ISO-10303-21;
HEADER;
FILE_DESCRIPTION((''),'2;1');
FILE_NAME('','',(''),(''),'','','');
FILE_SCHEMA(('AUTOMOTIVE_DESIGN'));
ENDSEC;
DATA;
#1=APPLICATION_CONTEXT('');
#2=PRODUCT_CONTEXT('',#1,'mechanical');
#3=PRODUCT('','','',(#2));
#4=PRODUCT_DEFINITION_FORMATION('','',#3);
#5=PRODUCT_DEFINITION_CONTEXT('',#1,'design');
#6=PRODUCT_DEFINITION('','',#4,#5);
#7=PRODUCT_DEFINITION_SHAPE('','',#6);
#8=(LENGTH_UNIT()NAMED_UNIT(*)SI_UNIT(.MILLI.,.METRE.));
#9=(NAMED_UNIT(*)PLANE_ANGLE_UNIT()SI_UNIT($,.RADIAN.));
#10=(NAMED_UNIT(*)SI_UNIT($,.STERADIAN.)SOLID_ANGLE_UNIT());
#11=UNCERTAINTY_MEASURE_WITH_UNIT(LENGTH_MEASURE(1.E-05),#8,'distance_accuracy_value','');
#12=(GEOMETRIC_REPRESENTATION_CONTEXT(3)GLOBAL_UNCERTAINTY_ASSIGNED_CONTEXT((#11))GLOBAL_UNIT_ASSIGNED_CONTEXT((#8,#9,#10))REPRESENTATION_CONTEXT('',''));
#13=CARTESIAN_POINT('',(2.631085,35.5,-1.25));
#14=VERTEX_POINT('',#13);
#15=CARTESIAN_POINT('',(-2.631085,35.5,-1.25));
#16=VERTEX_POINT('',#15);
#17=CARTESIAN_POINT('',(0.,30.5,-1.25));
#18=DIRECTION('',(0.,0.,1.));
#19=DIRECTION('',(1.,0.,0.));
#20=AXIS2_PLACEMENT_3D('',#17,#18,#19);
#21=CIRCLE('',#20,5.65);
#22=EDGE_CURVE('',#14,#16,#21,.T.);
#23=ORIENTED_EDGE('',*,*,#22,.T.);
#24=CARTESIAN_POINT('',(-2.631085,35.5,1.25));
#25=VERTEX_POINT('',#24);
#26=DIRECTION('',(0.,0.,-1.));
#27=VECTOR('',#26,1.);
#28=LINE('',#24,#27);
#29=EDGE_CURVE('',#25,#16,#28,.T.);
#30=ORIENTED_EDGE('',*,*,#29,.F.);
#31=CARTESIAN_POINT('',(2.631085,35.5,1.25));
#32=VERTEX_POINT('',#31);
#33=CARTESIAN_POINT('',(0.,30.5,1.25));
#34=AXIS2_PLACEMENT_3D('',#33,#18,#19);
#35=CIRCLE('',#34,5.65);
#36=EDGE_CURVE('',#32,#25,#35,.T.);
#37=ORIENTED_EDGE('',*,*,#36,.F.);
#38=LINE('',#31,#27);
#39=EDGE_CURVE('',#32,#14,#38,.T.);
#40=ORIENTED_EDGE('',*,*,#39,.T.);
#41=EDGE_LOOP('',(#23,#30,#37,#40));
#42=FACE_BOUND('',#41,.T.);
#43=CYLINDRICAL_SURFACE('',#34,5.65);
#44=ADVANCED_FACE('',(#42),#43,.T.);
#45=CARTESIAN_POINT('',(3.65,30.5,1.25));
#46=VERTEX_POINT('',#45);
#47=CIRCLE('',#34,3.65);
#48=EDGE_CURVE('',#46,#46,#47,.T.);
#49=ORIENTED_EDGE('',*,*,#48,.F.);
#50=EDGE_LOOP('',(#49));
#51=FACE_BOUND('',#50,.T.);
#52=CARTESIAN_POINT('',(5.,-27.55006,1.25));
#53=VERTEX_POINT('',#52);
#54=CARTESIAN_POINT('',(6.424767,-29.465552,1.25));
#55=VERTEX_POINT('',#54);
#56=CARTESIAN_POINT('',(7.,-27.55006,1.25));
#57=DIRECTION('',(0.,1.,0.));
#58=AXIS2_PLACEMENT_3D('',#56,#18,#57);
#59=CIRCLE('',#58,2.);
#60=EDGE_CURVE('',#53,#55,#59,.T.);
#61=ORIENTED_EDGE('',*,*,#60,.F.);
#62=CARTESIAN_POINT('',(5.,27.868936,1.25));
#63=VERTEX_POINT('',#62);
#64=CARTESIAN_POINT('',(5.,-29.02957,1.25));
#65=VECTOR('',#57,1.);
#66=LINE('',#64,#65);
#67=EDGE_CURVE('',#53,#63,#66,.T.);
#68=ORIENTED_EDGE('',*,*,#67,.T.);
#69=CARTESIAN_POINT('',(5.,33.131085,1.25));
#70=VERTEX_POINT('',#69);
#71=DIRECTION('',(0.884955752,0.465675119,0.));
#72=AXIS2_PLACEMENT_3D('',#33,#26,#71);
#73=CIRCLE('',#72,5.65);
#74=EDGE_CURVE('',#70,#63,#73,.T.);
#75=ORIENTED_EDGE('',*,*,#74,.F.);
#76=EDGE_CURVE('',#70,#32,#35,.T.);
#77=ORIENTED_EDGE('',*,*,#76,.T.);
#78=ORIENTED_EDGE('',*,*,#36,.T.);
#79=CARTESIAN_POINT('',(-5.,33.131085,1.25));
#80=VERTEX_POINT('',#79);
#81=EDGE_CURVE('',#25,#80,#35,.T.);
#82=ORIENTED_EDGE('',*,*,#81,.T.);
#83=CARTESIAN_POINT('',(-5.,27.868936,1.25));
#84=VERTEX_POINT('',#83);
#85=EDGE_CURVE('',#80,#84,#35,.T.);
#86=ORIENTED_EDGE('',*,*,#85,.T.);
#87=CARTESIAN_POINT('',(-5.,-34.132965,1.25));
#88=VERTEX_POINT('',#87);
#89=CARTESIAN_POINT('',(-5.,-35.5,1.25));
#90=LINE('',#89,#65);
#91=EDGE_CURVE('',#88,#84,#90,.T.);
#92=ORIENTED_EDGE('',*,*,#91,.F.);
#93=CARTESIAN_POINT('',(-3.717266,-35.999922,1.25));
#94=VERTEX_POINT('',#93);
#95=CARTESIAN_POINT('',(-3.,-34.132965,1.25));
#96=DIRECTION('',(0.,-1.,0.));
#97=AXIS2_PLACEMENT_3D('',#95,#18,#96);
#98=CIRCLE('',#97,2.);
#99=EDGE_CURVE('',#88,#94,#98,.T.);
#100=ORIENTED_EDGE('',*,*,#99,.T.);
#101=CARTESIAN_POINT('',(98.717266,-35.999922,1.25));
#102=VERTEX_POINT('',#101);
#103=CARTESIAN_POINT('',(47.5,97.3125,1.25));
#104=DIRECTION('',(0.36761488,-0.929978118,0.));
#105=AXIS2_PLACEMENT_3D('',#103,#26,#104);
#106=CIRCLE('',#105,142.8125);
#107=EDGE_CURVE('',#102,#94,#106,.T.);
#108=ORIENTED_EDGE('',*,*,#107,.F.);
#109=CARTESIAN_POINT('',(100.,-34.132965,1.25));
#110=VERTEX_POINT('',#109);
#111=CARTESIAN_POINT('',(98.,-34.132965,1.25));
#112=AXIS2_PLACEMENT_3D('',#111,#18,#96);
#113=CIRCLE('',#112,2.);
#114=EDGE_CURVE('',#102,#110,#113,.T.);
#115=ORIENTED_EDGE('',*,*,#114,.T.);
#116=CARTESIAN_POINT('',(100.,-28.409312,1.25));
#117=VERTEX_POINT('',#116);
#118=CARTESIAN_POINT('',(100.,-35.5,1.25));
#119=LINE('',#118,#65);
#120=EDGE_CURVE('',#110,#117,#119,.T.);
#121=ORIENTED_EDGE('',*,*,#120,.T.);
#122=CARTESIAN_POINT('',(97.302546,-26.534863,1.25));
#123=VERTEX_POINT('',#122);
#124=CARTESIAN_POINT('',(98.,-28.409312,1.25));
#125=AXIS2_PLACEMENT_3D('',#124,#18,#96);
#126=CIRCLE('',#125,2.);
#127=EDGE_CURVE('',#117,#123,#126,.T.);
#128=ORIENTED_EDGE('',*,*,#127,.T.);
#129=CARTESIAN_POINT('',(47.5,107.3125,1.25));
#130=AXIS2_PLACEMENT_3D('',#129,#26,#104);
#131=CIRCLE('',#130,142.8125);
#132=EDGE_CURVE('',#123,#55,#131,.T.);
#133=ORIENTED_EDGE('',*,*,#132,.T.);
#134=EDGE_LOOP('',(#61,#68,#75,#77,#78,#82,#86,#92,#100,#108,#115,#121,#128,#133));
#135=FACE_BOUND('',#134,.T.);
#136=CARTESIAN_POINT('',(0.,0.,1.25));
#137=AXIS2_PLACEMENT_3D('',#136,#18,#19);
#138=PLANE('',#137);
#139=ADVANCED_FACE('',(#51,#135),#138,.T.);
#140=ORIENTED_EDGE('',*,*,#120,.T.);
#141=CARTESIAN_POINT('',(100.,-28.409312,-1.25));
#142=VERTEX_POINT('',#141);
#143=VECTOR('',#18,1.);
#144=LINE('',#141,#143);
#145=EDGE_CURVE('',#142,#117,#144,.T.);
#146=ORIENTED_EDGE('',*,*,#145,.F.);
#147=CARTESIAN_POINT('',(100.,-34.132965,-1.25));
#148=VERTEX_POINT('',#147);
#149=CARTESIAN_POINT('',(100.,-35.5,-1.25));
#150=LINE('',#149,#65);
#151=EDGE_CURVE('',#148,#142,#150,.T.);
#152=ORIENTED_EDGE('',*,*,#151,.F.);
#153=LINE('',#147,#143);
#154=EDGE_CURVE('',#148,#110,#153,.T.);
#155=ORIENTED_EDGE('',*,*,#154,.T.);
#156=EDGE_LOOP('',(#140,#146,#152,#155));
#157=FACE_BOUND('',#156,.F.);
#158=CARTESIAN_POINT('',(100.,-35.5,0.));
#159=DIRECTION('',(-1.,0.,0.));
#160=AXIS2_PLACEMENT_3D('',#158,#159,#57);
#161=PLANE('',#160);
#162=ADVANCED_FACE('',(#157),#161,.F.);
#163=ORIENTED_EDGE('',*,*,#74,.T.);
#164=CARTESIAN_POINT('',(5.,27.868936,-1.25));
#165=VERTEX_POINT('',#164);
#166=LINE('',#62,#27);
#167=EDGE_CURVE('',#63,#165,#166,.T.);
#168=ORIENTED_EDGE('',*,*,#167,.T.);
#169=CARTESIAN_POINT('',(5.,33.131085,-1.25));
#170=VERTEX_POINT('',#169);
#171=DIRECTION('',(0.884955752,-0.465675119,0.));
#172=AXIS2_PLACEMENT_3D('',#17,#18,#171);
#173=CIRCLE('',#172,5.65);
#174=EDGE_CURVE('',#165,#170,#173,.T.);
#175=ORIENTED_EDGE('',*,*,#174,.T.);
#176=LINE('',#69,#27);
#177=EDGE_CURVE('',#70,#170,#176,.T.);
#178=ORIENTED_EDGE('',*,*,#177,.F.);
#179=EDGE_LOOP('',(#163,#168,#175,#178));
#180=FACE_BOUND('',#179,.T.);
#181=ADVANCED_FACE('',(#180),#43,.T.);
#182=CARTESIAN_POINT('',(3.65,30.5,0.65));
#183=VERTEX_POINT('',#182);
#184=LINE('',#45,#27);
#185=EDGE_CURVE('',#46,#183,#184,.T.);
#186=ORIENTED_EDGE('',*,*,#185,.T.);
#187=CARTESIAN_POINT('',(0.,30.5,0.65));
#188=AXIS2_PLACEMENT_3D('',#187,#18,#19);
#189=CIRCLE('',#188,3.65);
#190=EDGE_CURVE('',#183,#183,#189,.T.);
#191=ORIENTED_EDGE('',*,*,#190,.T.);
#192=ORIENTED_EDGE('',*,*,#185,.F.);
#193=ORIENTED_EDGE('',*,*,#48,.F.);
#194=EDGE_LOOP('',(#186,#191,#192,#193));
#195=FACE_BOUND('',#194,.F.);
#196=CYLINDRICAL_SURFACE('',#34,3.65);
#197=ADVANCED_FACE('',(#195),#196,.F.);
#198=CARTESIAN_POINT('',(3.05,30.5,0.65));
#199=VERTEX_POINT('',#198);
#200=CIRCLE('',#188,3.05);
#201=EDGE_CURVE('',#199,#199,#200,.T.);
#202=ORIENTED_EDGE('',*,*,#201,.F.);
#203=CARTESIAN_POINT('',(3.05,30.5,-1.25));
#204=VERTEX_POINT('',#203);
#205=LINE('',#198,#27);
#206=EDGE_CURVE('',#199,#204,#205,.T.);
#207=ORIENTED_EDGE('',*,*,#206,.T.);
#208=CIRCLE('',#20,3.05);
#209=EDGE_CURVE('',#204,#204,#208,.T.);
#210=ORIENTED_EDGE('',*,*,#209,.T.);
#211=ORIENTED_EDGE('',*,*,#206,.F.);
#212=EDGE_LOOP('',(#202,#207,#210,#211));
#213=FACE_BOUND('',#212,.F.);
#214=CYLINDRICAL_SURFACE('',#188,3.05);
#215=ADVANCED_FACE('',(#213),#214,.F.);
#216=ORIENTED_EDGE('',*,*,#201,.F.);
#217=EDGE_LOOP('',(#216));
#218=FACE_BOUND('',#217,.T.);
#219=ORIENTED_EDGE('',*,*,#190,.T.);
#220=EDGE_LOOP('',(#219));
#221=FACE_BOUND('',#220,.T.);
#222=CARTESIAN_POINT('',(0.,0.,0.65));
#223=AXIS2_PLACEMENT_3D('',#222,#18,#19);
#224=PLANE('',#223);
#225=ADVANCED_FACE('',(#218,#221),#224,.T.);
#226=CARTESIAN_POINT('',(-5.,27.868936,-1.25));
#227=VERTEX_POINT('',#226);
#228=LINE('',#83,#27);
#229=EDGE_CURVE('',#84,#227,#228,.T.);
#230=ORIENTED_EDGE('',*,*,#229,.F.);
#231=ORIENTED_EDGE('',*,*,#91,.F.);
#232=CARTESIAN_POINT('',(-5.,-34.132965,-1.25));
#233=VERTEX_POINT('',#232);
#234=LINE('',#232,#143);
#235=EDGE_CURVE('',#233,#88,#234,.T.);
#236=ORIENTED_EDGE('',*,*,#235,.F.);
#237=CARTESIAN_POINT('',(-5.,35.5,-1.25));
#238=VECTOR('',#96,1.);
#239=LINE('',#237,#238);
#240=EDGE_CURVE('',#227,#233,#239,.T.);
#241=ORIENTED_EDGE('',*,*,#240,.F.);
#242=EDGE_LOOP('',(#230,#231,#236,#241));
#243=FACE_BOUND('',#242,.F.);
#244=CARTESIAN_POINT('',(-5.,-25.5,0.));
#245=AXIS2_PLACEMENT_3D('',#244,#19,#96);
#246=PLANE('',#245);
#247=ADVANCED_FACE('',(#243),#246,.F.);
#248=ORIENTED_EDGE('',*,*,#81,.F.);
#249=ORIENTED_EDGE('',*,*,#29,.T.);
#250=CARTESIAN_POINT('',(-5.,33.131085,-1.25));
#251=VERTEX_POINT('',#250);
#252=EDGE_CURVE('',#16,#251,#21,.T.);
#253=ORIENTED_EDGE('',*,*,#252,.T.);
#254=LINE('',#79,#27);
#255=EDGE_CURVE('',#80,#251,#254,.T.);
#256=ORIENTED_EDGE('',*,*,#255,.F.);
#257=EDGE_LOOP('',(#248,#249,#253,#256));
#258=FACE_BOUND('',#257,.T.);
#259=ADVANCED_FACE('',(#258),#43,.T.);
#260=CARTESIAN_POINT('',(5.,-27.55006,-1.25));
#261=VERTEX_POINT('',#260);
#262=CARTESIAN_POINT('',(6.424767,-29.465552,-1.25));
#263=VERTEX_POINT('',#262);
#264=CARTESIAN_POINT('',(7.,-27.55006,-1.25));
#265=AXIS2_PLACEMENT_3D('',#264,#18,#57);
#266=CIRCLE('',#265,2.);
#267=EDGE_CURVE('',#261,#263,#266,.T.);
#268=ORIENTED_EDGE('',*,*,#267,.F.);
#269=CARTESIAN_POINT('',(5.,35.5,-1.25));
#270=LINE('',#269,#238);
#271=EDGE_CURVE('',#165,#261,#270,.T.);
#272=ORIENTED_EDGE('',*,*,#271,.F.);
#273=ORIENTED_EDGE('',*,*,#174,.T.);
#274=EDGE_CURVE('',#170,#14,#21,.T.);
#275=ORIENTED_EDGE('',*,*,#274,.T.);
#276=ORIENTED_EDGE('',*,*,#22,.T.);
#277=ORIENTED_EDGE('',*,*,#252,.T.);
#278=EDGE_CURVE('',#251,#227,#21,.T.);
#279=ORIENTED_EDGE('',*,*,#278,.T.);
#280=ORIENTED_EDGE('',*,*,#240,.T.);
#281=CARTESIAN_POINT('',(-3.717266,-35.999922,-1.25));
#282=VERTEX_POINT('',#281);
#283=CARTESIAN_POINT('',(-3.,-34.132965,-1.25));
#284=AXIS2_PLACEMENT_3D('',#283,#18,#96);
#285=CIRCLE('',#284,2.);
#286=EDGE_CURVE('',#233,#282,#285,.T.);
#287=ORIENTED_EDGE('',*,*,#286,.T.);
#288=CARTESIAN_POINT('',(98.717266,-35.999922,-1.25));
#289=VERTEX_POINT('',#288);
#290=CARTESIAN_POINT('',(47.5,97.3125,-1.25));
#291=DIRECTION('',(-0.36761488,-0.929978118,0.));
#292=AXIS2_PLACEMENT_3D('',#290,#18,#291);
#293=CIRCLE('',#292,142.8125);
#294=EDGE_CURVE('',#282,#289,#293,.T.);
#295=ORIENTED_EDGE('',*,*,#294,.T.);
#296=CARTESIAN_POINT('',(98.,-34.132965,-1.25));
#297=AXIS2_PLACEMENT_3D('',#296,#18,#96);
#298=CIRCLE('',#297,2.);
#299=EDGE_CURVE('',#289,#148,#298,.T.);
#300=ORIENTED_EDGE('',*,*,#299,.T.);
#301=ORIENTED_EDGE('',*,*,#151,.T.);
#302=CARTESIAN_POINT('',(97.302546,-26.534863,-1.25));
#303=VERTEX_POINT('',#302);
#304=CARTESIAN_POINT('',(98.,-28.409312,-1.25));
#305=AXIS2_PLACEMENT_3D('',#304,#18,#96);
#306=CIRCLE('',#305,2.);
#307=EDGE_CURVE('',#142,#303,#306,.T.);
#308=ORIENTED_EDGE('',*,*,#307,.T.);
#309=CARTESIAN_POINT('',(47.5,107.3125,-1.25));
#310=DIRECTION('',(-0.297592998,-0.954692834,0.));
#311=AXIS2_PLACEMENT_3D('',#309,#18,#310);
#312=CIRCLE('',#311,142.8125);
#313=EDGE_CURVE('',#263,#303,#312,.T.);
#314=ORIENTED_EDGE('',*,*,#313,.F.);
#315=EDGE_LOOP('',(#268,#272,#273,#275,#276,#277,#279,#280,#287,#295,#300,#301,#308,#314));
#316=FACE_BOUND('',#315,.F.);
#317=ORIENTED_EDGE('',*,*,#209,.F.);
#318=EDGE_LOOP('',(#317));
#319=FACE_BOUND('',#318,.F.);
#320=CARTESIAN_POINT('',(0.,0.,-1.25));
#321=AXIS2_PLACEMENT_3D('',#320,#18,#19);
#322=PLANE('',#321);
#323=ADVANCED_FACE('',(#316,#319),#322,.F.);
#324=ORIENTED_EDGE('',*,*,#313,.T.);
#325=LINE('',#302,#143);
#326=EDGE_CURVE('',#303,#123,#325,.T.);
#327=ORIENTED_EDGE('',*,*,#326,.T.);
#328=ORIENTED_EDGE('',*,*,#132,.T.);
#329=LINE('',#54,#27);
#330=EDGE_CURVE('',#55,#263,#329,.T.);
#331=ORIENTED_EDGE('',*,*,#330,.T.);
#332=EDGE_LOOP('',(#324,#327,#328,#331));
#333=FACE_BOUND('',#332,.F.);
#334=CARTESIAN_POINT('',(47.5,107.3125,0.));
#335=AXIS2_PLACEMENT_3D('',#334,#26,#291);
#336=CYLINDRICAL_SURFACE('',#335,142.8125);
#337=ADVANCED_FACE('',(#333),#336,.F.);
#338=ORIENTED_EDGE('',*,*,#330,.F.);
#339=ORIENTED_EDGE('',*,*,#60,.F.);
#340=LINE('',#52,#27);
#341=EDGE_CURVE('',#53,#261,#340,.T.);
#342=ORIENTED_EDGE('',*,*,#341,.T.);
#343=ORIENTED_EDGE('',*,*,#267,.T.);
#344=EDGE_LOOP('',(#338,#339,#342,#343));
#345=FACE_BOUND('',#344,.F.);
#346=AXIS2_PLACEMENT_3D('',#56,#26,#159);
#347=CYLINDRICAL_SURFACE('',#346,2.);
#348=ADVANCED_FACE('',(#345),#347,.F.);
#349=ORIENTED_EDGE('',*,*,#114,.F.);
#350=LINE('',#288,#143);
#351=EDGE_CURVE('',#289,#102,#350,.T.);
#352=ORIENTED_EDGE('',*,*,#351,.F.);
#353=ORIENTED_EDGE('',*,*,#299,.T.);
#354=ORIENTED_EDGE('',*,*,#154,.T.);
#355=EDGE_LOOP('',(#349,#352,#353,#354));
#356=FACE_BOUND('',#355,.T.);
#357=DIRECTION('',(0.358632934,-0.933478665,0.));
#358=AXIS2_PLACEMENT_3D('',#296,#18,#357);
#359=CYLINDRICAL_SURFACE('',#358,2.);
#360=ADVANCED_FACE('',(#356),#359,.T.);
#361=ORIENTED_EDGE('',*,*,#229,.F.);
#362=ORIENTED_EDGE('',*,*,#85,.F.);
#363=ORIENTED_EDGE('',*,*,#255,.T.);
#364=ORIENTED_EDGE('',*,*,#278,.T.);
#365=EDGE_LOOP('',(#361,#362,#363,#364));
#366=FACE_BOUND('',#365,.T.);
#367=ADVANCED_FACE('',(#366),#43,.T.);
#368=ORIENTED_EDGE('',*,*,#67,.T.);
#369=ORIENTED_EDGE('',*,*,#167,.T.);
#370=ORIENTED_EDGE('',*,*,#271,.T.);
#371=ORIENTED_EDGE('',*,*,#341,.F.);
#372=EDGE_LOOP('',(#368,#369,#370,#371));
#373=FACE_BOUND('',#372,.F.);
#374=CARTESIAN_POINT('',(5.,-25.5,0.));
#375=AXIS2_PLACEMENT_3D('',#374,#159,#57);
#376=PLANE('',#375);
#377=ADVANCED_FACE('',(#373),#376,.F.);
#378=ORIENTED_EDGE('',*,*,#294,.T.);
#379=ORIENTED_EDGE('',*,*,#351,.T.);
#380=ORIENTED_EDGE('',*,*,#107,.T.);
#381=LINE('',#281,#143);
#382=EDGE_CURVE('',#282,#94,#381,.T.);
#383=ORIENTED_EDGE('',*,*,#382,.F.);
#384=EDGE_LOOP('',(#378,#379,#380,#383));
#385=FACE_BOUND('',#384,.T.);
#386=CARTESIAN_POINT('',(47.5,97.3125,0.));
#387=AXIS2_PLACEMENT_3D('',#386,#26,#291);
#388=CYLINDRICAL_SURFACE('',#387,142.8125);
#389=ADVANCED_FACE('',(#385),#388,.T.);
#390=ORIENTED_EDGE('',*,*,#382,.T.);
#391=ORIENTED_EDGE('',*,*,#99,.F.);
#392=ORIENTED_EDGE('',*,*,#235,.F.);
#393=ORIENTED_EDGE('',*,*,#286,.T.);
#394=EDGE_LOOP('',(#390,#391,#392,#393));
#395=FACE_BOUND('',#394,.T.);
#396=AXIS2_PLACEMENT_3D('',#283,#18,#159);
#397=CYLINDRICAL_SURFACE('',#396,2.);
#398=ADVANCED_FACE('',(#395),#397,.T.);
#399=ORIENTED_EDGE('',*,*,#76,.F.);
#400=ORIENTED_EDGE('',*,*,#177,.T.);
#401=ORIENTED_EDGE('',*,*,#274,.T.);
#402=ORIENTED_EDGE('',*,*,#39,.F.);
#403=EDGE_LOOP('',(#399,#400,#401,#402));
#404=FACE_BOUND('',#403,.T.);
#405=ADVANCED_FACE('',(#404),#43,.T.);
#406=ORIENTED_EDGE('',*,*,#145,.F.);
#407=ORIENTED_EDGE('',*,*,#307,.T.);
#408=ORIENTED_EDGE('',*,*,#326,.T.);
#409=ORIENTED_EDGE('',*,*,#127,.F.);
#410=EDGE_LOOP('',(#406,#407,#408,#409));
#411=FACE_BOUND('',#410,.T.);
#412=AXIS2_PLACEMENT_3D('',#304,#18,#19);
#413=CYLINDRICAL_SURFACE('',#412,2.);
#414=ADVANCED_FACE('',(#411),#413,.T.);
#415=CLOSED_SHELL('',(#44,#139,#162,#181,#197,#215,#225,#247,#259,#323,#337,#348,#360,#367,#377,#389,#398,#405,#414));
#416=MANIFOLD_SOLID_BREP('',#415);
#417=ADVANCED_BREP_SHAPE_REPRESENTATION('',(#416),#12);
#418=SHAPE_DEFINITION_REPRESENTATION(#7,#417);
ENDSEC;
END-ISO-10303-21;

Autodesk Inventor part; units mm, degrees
ref_plane "YZ Plane" through (0, 0, 0) normal (1, 0, 0) x (0, 1, 0)
ref_plane "XZ Plane" through (0, 0, 0) normal (0, 1, 0) x (-1, 0, 0)
ref_plane "XY Plane" through (0, 0, 0) normal (0, 0, 1) x (1, 0, 0)
sketch "スケッチ1" plane through (0, 0, 0) normal (0, 0, 1) x (1, 0, 0)
  line L0 (-5, -35.5) -> (5, -35.5)
  line L1 (5, -35.5) -> (5, 35.5)
  line L2 (5, 35.5) -> (-5, 35.5)
  line L3 (-5, 35.5) -> (-5, -35.5)
  line L4 (-5, -35.5) -> (5, 35.5) construction
  line L5 (5, -35.5) -> (-5, 35.5) construction
  line L6 (-5, -35.5) -> (100, -35.5)
  line L7 (100, -35.5) -> (100, -25.5)
  line L8 (100, -25.5) -> (-5, -25.5)
  line L9 (-5, -25.5) -> (-5, -35.5)
  line L10 (47.5, -35.5) -> (47.5, -45.5)
  arc A0 (-5, -25.5) -> (100, -25.5) centre (47.5, 107.3125) ccw
  arc A1 (-5, -35.5) -> (100, -35.5) centre (47.5, 97.3125) ccw
  point P0 (0, 0)
  point P1 (5, -29.0296)
  dimension "d0" = 10
  dimension "d1" = 71
  dimension "d2" = 105
  dimension "d3" = 10
  dimension "d4" = 10
extrude "押し出し1" add sketch "スケッチ1" along normal mid plane 2.5 contours L3 A0 L1 L0 | L0 L6 L10 A1 | L1 A0 L6 | L3 L2 L1 L8 | L8 L1 A0 | L10 L6 A1 | A0 L7 L6 picked at (-0.5654, -25.9196)
sketch "スケッチ2" plane through (0, 0, 1.25) normal (0, 0, 1) x (1, 0, 0)
  line L0 (5, 35.5) -> (-5, 35.5) projected
  line L1 (5, -29.0296) -> (5, 35.5) projected
  circle A0 centre (0, 30.5) radius 3.05
  circle A1 centre (0, 30.5) radius 3.65
  point P0 (0, 0)
  dimension "d7" = 5
  dimension "d8" = 5
  dimension "d9" = 6.1
  dimension "d10" = 7.3
extrude "押し出し2" cut sketch "スケッチ2" against normal blind 0.6 contours A0 | A1
sketch "スケッチ3" plane through (0, 30.5, 0.65) normal (0, 0, 1) x (1, 0, 0)
  circle A0 centre (0, 0) radius 3.05
  point P0 (0, -30.5)
  dimension "d13" = 6.1
extrude "押し出し3" cut sketch "スケッチ3" against normal blind 1.9
sketch "スケッチ6" plane through (0, 0, 1.25) normal (0, 0, 1) x (1, 0, 0)
  circle A0 centre (0, 30.5) radius 3.65 projected
  line L0 (-5, 35.5) -> (-5, -35.5) projected
  arc A1 (-5, -35.5) -> (100, -35.5) centre (47.5, 97.3125) ccw projected
  line L1 (100, -35.5) -> (100, -25.5) projected
  arc A2 (5, -29.0296) -> (100, -25.5) centre (47.5, 107.3125) ccw projected
  line L2 (5, -29.0296) -> (5, 35.5) projected
  line L3 (5, 35.5) -> (-5, 35.5) projected
  circle A3 centre (0, 30.5) radius 5.65
  point P0 (0, 0)
  point P1 (-5, 27.8689)
  point P2 (-5, 33.1311)
  point P3 (-2.6311, 35.5)
  point P4 (2.6311, 35.5)
  point P5 (5, 33.1311)
  point P6 (5, 27.8689)
  dimension "d18" = 11.3
extrude "押し出し5" add sketch "スケッチ6" against normal blind 2.5 contours L0 A3 | A3 L3 | L2 A3
sketch "スケッチ7" plane through (0, 0, 1.25) normal (0, 0, 1) x (1, 0, 0)
  circle A0 centre (0, 30.5) radius 3.65 projected
  line L0 (-5, 35.5) -> (-5, 33.1311) projected
  arc A1 (-5, 33.1311) -> (-5, 27.8689) centre (0, 30.5) ccw projected
  line L1 (-5, 27.8689) -> (-5, -35.5) projected
  arc A2 (-5, -35.5) -> (100, -35.5) centre (47.5, 97.3125) ccw projected
  line L2 (100, -35.5) -> (100, -25.5) projected
  arc A3 (5, -29.0296) -> (100, -25.5) centre (47.5, 107.3125) ccw projected
  line L3 (5, -29.0296) -> (5, 27.8689) projected
  arc A4 (5, 27.8689) -> (5, 33.1311) centre (0, 30.5) ccw projected
  line L4 (5, 33.1311) -> (5, 35.5) projected
  line L5 (5, 35.5) -> (2.6311, 35.5) projected
  arc A5 (2.6311, 35.5) -> (-2.6311, 35.5) centre (0, 30.5) ccw projected
  line L6 (-2.6311, 35.5) -> (-5, 35.5) projected
  circle A6 centre (0, 30.5) radius 5.65
  point P0 (0, 0)
  point P1 (-2.6311, 35.5)
  point P2 (2.6311, 35.5)
extrude "押し出し6" cut sketch "スケッチ7" against normal blind 2.5 contours L6 A6 L0 | L5 L4 A6
fillet "フィレット1" radius 2 4 edges at (-5, -35.5, 0) (5, -29.0296, 0) (100, -25.5, 0) (100, -35.5, 0)
properties part number "指_中"
